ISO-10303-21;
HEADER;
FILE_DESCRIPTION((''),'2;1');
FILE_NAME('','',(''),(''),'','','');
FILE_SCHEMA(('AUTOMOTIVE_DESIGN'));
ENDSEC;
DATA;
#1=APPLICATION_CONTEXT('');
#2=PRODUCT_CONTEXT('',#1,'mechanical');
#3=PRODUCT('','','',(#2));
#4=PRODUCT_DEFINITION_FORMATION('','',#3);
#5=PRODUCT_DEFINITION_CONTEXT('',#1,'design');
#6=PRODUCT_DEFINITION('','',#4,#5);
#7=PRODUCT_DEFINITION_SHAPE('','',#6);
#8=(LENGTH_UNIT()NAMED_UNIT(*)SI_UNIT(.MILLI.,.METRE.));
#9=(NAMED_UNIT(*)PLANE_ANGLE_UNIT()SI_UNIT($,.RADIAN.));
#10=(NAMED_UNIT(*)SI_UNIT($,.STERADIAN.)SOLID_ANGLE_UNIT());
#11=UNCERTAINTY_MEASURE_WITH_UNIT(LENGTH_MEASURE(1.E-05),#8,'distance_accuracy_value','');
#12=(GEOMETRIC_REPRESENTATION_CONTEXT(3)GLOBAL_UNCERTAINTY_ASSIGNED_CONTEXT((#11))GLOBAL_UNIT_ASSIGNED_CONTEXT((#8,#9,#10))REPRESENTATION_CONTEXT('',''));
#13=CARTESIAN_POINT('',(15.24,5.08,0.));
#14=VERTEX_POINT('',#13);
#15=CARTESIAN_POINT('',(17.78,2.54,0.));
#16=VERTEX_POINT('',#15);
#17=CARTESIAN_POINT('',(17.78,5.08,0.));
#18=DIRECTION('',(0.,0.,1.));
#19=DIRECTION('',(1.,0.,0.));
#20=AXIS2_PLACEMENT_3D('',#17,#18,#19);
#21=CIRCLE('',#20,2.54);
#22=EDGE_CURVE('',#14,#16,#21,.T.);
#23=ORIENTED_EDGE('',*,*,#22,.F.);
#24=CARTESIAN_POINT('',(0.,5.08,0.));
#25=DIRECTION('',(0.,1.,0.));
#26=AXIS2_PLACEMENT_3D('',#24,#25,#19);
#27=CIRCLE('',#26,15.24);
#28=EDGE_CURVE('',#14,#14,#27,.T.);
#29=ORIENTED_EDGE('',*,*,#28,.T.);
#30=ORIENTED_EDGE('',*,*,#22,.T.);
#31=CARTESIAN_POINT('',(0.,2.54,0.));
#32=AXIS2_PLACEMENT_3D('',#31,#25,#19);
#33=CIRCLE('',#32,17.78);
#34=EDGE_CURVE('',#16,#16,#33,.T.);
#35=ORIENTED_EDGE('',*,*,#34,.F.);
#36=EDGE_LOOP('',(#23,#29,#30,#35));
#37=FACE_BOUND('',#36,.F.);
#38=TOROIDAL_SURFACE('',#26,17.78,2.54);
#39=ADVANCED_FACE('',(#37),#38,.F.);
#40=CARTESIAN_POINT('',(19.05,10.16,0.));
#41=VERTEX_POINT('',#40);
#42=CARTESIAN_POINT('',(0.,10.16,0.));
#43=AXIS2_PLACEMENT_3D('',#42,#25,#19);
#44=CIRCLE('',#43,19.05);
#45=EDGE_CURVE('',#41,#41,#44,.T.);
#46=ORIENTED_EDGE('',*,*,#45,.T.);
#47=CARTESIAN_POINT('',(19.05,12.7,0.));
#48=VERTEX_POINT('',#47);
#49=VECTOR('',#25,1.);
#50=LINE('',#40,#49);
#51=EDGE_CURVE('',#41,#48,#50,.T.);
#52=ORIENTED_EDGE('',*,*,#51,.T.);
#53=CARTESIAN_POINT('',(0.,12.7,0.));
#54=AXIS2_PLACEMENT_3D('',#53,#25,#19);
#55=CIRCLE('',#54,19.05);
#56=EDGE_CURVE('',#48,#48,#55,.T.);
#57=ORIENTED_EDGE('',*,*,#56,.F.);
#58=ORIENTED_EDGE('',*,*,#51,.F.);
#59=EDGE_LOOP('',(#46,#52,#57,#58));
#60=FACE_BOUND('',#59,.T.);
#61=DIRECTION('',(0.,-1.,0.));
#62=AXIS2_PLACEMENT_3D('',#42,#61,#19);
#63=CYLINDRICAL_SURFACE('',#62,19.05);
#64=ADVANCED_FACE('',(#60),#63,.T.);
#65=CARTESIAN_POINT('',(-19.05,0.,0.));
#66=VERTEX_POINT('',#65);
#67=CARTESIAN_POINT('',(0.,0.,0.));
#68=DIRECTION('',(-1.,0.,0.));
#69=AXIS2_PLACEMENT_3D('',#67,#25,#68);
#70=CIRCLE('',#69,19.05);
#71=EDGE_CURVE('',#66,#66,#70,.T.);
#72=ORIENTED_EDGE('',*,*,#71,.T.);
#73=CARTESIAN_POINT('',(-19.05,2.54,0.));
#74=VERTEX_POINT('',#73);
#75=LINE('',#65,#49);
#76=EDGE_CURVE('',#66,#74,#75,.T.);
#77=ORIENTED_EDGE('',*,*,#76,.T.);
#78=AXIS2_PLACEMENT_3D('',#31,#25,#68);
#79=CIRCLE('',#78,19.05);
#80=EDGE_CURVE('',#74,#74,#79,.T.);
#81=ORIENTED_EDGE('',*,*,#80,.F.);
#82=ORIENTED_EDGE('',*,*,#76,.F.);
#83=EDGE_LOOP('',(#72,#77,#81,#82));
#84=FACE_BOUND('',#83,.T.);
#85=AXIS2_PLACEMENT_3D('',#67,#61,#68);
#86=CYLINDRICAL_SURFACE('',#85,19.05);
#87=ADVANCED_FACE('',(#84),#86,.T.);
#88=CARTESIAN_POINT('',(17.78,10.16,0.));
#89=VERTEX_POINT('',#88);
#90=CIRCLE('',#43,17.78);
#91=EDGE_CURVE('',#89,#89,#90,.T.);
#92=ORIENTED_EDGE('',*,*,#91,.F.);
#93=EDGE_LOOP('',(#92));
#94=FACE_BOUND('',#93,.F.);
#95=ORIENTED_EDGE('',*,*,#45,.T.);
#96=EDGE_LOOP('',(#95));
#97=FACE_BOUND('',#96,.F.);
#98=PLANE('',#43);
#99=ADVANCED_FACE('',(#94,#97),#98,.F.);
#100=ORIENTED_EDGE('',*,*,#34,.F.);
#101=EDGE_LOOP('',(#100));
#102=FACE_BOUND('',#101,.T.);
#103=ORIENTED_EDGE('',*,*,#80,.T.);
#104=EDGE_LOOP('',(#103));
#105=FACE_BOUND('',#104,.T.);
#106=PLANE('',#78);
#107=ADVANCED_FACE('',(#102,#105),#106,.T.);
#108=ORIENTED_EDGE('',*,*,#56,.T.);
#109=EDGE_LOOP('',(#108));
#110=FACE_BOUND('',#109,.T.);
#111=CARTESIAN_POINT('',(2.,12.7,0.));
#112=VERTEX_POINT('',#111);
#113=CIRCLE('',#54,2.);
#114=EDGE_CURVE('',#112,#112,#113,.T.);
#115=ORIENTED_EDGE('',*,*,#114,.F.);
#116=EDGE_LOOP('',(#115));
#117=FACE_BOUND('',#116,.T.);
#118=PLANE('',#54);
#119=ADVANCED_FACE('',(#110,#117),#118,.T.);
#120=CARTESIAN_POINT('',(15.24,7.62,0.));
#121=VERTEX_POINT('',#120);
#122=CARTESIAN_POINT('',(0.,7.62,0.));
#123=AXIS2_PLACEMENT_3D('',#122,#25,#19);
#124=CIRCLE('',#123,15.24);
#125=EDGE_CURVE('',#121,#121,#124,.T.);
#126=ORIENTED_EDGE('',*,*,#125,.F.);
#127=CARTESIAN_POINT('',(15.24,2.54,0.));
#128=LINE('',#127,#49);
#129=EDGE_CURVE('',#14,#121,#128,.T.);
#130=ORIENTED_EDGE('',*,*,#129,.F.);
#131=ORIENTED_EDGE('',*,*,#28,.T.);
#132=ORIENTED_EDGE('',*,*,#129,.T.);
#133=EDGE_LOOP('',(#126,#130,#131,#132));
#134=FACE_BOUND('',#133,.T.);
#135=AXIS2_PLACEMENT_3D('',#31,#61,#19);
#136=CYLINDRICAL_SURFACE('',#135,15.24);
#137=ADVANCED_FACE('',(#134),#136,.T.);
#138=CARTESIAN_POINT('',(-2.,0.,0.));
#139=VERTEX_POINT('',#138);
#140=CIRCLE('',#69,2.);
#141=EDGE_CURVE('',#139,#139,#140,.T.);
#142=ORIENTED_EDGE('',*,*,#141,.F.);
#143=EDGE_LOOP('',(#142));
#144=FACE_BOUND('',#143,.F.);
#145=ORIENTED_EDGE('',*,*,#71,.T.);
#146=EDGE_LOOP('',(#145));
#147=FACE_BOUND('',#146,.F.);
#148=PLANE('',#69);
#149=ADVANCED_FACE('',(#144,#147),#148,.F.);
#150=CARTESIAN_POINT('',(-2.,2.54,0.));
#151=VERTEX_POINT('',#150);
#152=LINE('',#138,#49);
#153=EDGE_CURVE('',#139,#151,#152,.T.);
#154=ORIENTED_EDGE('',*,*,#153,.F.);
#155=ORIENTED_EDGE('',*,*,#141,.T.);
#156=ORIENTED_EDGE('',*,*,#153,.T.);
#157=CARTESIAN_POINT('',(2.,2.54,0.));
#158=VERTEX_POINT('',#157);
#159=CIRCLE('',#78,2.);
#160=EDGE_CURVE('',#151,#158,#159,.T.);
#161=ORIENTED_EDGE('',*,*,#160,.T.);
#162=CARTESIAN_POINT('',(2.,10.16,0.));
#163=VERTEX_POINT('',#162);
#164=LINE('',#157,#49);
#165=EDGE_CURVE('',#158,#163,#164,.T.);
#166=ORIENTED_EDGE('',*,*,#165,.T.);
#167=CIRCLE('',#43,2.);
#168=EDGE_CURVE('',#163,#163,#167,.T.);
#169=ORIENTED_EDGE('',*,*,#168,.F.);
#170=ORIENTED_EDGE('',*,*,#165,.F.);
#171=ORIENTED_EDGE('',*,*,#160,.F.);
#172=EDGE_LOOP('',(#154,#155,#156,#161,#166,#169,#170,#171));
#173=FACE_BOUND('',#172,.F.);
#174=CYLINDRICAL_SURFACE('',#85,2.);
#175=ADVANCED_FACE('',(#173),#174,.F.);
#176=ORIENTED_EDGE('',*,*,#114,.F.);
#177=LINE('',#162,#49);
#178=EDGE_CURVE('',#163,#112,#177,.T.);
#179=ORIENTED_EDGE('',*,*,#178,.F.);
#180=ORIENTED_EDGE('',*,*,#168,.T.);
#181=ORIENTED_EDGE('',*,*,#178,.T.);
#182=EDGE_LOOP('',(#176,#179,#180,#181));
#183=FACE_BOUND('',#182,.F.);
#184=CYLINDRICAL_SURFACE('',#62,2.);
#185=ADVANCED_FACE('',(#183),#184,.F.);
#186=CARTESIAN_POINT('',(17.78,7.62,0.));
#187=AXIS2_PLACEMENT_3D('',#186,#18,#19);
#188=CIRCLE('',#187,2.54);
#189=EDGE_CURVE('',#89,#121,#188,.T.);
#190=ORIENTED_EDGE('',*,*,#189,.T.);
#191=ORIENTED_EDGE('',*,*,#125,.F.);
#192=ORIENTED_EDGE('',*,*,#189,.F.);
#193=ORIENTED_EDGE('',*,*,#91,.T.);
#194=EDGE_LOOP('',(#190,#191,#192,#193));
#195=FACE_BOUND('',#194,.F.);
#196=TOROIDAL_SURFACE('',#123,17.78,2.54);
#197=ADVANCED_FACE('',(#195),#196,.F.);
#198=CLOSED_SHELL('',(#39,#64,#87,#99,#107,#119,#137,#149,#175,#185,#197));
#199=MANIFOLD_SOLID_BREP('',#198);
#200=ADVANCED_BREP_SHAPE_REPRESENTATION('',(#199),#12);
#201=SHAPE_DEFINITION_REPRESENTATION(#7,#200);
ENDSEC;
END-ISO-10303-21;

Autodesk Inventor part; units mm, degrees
ref_plane "YZ Plane" through (0, 0, 0) normal (1, 0, 0) x (0, 1, 0)
ref_plane "XZ Plane" through (0, 0, 0) normal (0, 1, 0) x (-1, 0, 0)
ref_plane "XY Plane" through (0, 0, 0) normal (0, 0, 1) x (1, 0, 0)
sketch "Sketch1" plane through (0, 0, 0) normal (0, 1, 0) x (-1, 0, 0)
  circle A0 centre (0, 0) radius 19.05
  circle A1 centre (0, 0) radius 2
  dimension "d0" = 38.1
  dimension "d1" = 4
extrude "Extrusion1" add sketch "Sketch1" along normal blind 2.54
sketch "Sketch2" plane through (0, 2.54, 0) normal (0, 1, 0) x (1, 0, 0)
  circle A0 centre (0, 0) radius 2
  circle A1 centre (0, 0) radius 15.24
  dimension "d4" = 4
  dimension "d5" = 30.48
extrude "Extrusion2" add sketch "Sketch2" along normal blind 7.62
sketch "Sketch3" plane through (0, 10.16, 0) normal (0, 1, 0) x (1, 0, 0)
  circle A0 centre (0, 0) radius 2
  circle A1 centre (0, 0) radius 19.05
  dimension "d8" = 4
  dimension "d9" = 38.1
extrude "Extrusion3" add sketch "Sketch3" along normal blind 2.54
fillet "Fillet1" radius 2.54 1 edges at (-15.24, 10.16, 0)
fillet "Fillet2" radius 2.54 1 edges at (-15.24, 2.54, 0)
properties part number "pulley"
